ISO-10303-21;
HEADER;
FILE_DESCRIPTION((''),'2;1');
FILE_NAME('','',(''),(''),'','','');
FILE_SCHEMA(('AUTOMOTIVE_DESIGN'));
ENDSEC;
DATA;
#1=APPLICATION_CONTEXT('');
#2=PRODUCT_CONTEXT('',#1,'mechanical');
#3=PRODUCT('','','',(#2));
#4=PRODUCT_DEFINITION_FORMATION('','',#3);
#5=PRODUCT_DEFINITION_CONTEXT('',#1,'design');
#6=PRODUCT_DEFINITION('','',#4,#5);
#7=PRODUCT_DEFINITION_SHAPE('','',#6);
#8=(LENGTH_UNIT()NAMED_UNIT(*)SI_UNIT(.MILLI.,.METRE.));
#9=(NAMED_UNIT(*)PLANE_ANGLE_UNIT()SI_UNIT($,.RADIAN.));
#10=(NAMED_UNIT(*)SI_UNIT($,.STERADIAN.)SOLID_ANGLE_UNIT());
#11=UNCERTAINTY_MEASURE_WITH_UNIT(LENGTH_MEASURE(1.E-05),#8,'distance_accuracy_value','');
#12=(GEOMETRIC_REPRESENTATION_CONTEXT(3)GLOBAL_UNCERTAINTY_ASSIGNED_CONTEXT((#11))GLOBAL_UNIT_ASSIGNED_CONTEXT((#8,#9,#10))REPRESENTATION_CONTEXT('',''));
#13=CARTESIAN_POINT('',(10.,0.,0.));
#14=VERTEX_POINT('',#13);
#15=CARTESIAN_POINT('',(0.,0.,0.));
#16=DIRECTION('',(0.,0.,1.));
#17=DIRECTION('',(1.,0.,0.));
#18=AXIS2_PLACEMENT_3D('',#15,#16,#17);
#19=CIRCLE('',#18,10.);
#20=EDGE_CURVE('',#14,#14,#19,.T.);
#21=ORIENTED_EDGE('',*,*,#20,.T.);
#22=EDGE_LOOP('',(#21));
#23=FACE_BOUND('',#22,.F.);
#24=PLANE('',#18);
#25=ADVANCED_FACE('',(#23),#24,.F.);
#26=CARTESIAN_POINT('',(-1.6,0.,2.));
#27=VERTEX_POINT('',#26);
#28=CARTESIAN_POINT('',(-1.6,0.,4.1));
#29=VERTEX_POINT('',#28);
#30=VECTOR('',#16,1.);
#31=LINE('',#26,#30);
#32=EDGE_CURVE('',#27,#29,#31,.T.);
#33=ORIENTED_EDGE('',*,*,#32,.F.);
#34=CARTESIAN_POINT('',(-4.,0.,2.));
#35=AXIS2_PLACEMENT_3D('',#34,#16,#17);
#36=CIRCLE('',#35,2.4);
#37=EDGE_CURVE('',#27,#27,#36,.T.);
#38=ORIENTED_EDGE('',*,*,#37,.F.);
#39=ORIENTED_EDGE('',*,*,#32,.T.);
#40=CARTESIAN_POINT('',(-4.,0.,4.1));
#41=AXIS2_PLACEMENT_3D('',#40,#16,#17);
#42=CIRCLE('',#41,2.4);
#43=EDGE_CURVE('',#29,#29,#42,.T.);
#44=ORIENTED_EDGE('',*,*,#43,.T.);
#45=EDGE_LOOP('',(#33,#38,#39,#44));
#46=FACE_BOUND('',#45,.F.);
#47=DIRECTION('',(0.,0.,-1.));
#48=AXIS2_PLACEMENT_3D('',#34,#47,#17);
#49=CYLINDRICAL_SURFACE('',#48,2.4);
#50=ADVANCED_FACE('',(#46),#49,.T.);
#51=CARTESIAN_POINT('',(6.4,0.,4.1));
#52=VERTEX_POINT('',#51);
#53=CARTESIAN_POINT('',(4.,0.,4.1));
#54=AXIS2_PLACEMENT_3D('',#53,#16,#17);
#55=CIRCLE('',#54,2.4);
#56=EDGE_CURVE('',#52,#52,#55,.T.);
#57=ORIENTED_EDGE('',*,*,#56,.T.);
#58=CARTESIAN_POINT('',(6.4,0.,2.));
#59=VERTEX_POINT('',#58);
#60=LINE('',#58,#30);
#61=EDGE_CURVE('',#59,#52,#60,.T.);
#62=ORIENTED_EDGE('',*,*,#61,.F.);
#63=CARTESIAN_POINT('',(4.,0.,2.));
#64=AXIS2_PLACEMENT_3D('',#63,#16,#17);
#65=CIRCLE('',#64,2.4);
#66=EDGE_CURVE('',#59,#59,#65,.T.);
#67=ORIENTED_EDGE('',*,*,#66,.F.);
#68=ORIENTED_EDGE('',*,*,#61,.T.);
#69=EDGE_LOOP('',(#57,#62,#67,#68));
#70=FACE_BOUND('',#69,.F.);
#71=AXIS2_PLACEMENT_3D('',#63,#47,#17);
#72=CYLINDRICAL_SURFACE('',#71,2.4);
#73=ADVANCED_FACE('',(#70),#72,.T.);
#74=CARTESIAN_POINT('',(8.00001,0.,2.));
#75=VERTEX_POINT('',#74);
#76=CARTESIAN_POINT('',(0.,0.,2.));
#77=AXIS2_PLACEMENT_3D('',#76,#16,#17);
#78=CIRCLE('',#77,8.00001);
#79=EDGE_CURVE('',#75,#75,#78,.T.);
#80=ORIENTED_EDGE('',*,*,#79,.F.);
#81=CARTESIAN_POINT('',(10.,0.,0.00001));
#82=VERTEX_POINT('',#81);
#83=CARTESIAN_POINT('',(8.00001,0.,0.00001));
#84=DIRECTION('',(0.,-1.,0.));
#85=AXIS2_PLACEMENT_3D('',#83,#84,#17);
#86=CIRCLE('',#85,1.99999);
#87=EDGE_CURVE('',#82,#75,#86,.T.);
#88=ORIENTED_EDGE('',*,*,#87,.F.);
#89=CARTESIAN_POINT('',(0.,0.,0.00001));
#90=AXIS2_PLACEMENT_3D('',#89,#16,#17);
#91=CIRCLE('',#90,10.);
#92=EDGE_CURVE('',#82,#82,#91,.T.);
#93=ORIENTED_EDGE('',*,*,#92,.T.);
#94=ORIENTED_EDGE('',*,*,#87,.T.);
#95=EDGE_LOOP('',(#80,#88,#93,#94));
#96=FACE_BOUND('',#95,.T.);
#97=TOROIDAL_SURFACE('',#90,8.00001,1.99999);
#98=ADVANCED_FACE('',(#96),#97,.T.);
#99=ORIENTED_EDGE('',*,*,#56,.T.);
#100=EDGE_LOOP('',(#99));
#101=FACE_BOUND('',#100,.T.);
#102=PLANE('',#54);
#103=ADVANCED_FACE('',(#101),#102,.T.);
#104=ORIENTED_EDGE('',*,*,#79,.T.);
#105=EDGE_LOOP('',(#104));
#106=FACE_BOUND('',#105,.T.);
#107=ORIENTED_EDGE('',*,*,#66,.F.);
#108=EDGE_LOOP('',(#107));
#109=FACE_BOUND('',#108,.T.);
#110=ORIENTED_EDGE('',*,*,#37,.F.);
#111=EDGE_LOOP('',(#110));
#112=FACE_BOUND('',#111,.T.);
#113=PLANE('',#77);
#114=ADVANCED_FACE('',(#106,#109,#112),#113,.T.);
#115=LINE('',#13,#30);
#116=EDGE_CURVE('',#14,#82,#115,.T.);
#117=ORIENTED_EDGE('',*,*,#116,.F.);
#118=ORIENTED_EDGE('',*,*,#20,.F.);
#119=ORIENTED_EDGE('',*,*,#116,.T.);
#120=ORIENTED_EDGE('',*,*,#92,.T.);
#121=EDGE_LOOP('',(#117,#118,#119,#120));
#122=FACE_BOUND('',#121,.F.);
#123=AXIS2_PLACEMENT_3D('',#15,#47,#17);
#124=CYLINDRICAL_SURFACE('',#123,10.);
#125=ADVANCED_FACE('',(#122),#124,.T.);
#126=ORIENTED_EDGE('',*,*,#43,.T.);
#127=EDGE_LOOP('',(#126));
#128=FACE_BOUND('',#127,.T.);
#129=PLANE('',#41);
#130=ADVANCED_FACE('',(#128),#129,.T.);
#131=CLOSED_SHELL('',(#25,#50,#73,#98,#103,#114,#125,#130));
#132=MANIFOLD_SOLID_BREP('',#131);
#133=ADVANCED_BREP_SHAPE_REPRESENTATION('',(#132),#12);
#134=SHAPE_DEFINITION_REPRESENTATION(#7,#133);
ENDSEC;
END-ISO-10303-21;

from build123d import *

# Parameters (mm, degrees)
F0_R     = 10
F1_DEPTH = 2
F2_R     = 1.99999
F3_R     = 2.4
F4_DEPTH = 2.1


# Not quite as in the source:
# - a fillet or chamfer is up to 0.001 mm smaller than in the source, because OpenCascade refuses the exact size


with BuildPart() as f1:
    # F0 (on Top) → F1 (new body)
    with BuildSketch(Plane.XY):
        Circle(F0_R)
    extrude(amount=F1_DEPTH)

    # F2 (radius 2 in the source; OpenCascade refuses exactly that, so slightly less here)
    f2_edges = [f1.edges().sort_by_distance(p)[0] for p in [
        (-10, 0, 2),
    ]]
    fillet(f2_edges, radius=F2_R)

    # F3 (on face) → F4 (join)
    with BuildSketch(Plane.XY.offset(2)):
        with Locations((-4, 0)):
            Circle(F3_R)
        with Locations((4, 0)):
            Circle(F3_R)
    extrude(amount=F4_DEPTH)


solid = f1.part
